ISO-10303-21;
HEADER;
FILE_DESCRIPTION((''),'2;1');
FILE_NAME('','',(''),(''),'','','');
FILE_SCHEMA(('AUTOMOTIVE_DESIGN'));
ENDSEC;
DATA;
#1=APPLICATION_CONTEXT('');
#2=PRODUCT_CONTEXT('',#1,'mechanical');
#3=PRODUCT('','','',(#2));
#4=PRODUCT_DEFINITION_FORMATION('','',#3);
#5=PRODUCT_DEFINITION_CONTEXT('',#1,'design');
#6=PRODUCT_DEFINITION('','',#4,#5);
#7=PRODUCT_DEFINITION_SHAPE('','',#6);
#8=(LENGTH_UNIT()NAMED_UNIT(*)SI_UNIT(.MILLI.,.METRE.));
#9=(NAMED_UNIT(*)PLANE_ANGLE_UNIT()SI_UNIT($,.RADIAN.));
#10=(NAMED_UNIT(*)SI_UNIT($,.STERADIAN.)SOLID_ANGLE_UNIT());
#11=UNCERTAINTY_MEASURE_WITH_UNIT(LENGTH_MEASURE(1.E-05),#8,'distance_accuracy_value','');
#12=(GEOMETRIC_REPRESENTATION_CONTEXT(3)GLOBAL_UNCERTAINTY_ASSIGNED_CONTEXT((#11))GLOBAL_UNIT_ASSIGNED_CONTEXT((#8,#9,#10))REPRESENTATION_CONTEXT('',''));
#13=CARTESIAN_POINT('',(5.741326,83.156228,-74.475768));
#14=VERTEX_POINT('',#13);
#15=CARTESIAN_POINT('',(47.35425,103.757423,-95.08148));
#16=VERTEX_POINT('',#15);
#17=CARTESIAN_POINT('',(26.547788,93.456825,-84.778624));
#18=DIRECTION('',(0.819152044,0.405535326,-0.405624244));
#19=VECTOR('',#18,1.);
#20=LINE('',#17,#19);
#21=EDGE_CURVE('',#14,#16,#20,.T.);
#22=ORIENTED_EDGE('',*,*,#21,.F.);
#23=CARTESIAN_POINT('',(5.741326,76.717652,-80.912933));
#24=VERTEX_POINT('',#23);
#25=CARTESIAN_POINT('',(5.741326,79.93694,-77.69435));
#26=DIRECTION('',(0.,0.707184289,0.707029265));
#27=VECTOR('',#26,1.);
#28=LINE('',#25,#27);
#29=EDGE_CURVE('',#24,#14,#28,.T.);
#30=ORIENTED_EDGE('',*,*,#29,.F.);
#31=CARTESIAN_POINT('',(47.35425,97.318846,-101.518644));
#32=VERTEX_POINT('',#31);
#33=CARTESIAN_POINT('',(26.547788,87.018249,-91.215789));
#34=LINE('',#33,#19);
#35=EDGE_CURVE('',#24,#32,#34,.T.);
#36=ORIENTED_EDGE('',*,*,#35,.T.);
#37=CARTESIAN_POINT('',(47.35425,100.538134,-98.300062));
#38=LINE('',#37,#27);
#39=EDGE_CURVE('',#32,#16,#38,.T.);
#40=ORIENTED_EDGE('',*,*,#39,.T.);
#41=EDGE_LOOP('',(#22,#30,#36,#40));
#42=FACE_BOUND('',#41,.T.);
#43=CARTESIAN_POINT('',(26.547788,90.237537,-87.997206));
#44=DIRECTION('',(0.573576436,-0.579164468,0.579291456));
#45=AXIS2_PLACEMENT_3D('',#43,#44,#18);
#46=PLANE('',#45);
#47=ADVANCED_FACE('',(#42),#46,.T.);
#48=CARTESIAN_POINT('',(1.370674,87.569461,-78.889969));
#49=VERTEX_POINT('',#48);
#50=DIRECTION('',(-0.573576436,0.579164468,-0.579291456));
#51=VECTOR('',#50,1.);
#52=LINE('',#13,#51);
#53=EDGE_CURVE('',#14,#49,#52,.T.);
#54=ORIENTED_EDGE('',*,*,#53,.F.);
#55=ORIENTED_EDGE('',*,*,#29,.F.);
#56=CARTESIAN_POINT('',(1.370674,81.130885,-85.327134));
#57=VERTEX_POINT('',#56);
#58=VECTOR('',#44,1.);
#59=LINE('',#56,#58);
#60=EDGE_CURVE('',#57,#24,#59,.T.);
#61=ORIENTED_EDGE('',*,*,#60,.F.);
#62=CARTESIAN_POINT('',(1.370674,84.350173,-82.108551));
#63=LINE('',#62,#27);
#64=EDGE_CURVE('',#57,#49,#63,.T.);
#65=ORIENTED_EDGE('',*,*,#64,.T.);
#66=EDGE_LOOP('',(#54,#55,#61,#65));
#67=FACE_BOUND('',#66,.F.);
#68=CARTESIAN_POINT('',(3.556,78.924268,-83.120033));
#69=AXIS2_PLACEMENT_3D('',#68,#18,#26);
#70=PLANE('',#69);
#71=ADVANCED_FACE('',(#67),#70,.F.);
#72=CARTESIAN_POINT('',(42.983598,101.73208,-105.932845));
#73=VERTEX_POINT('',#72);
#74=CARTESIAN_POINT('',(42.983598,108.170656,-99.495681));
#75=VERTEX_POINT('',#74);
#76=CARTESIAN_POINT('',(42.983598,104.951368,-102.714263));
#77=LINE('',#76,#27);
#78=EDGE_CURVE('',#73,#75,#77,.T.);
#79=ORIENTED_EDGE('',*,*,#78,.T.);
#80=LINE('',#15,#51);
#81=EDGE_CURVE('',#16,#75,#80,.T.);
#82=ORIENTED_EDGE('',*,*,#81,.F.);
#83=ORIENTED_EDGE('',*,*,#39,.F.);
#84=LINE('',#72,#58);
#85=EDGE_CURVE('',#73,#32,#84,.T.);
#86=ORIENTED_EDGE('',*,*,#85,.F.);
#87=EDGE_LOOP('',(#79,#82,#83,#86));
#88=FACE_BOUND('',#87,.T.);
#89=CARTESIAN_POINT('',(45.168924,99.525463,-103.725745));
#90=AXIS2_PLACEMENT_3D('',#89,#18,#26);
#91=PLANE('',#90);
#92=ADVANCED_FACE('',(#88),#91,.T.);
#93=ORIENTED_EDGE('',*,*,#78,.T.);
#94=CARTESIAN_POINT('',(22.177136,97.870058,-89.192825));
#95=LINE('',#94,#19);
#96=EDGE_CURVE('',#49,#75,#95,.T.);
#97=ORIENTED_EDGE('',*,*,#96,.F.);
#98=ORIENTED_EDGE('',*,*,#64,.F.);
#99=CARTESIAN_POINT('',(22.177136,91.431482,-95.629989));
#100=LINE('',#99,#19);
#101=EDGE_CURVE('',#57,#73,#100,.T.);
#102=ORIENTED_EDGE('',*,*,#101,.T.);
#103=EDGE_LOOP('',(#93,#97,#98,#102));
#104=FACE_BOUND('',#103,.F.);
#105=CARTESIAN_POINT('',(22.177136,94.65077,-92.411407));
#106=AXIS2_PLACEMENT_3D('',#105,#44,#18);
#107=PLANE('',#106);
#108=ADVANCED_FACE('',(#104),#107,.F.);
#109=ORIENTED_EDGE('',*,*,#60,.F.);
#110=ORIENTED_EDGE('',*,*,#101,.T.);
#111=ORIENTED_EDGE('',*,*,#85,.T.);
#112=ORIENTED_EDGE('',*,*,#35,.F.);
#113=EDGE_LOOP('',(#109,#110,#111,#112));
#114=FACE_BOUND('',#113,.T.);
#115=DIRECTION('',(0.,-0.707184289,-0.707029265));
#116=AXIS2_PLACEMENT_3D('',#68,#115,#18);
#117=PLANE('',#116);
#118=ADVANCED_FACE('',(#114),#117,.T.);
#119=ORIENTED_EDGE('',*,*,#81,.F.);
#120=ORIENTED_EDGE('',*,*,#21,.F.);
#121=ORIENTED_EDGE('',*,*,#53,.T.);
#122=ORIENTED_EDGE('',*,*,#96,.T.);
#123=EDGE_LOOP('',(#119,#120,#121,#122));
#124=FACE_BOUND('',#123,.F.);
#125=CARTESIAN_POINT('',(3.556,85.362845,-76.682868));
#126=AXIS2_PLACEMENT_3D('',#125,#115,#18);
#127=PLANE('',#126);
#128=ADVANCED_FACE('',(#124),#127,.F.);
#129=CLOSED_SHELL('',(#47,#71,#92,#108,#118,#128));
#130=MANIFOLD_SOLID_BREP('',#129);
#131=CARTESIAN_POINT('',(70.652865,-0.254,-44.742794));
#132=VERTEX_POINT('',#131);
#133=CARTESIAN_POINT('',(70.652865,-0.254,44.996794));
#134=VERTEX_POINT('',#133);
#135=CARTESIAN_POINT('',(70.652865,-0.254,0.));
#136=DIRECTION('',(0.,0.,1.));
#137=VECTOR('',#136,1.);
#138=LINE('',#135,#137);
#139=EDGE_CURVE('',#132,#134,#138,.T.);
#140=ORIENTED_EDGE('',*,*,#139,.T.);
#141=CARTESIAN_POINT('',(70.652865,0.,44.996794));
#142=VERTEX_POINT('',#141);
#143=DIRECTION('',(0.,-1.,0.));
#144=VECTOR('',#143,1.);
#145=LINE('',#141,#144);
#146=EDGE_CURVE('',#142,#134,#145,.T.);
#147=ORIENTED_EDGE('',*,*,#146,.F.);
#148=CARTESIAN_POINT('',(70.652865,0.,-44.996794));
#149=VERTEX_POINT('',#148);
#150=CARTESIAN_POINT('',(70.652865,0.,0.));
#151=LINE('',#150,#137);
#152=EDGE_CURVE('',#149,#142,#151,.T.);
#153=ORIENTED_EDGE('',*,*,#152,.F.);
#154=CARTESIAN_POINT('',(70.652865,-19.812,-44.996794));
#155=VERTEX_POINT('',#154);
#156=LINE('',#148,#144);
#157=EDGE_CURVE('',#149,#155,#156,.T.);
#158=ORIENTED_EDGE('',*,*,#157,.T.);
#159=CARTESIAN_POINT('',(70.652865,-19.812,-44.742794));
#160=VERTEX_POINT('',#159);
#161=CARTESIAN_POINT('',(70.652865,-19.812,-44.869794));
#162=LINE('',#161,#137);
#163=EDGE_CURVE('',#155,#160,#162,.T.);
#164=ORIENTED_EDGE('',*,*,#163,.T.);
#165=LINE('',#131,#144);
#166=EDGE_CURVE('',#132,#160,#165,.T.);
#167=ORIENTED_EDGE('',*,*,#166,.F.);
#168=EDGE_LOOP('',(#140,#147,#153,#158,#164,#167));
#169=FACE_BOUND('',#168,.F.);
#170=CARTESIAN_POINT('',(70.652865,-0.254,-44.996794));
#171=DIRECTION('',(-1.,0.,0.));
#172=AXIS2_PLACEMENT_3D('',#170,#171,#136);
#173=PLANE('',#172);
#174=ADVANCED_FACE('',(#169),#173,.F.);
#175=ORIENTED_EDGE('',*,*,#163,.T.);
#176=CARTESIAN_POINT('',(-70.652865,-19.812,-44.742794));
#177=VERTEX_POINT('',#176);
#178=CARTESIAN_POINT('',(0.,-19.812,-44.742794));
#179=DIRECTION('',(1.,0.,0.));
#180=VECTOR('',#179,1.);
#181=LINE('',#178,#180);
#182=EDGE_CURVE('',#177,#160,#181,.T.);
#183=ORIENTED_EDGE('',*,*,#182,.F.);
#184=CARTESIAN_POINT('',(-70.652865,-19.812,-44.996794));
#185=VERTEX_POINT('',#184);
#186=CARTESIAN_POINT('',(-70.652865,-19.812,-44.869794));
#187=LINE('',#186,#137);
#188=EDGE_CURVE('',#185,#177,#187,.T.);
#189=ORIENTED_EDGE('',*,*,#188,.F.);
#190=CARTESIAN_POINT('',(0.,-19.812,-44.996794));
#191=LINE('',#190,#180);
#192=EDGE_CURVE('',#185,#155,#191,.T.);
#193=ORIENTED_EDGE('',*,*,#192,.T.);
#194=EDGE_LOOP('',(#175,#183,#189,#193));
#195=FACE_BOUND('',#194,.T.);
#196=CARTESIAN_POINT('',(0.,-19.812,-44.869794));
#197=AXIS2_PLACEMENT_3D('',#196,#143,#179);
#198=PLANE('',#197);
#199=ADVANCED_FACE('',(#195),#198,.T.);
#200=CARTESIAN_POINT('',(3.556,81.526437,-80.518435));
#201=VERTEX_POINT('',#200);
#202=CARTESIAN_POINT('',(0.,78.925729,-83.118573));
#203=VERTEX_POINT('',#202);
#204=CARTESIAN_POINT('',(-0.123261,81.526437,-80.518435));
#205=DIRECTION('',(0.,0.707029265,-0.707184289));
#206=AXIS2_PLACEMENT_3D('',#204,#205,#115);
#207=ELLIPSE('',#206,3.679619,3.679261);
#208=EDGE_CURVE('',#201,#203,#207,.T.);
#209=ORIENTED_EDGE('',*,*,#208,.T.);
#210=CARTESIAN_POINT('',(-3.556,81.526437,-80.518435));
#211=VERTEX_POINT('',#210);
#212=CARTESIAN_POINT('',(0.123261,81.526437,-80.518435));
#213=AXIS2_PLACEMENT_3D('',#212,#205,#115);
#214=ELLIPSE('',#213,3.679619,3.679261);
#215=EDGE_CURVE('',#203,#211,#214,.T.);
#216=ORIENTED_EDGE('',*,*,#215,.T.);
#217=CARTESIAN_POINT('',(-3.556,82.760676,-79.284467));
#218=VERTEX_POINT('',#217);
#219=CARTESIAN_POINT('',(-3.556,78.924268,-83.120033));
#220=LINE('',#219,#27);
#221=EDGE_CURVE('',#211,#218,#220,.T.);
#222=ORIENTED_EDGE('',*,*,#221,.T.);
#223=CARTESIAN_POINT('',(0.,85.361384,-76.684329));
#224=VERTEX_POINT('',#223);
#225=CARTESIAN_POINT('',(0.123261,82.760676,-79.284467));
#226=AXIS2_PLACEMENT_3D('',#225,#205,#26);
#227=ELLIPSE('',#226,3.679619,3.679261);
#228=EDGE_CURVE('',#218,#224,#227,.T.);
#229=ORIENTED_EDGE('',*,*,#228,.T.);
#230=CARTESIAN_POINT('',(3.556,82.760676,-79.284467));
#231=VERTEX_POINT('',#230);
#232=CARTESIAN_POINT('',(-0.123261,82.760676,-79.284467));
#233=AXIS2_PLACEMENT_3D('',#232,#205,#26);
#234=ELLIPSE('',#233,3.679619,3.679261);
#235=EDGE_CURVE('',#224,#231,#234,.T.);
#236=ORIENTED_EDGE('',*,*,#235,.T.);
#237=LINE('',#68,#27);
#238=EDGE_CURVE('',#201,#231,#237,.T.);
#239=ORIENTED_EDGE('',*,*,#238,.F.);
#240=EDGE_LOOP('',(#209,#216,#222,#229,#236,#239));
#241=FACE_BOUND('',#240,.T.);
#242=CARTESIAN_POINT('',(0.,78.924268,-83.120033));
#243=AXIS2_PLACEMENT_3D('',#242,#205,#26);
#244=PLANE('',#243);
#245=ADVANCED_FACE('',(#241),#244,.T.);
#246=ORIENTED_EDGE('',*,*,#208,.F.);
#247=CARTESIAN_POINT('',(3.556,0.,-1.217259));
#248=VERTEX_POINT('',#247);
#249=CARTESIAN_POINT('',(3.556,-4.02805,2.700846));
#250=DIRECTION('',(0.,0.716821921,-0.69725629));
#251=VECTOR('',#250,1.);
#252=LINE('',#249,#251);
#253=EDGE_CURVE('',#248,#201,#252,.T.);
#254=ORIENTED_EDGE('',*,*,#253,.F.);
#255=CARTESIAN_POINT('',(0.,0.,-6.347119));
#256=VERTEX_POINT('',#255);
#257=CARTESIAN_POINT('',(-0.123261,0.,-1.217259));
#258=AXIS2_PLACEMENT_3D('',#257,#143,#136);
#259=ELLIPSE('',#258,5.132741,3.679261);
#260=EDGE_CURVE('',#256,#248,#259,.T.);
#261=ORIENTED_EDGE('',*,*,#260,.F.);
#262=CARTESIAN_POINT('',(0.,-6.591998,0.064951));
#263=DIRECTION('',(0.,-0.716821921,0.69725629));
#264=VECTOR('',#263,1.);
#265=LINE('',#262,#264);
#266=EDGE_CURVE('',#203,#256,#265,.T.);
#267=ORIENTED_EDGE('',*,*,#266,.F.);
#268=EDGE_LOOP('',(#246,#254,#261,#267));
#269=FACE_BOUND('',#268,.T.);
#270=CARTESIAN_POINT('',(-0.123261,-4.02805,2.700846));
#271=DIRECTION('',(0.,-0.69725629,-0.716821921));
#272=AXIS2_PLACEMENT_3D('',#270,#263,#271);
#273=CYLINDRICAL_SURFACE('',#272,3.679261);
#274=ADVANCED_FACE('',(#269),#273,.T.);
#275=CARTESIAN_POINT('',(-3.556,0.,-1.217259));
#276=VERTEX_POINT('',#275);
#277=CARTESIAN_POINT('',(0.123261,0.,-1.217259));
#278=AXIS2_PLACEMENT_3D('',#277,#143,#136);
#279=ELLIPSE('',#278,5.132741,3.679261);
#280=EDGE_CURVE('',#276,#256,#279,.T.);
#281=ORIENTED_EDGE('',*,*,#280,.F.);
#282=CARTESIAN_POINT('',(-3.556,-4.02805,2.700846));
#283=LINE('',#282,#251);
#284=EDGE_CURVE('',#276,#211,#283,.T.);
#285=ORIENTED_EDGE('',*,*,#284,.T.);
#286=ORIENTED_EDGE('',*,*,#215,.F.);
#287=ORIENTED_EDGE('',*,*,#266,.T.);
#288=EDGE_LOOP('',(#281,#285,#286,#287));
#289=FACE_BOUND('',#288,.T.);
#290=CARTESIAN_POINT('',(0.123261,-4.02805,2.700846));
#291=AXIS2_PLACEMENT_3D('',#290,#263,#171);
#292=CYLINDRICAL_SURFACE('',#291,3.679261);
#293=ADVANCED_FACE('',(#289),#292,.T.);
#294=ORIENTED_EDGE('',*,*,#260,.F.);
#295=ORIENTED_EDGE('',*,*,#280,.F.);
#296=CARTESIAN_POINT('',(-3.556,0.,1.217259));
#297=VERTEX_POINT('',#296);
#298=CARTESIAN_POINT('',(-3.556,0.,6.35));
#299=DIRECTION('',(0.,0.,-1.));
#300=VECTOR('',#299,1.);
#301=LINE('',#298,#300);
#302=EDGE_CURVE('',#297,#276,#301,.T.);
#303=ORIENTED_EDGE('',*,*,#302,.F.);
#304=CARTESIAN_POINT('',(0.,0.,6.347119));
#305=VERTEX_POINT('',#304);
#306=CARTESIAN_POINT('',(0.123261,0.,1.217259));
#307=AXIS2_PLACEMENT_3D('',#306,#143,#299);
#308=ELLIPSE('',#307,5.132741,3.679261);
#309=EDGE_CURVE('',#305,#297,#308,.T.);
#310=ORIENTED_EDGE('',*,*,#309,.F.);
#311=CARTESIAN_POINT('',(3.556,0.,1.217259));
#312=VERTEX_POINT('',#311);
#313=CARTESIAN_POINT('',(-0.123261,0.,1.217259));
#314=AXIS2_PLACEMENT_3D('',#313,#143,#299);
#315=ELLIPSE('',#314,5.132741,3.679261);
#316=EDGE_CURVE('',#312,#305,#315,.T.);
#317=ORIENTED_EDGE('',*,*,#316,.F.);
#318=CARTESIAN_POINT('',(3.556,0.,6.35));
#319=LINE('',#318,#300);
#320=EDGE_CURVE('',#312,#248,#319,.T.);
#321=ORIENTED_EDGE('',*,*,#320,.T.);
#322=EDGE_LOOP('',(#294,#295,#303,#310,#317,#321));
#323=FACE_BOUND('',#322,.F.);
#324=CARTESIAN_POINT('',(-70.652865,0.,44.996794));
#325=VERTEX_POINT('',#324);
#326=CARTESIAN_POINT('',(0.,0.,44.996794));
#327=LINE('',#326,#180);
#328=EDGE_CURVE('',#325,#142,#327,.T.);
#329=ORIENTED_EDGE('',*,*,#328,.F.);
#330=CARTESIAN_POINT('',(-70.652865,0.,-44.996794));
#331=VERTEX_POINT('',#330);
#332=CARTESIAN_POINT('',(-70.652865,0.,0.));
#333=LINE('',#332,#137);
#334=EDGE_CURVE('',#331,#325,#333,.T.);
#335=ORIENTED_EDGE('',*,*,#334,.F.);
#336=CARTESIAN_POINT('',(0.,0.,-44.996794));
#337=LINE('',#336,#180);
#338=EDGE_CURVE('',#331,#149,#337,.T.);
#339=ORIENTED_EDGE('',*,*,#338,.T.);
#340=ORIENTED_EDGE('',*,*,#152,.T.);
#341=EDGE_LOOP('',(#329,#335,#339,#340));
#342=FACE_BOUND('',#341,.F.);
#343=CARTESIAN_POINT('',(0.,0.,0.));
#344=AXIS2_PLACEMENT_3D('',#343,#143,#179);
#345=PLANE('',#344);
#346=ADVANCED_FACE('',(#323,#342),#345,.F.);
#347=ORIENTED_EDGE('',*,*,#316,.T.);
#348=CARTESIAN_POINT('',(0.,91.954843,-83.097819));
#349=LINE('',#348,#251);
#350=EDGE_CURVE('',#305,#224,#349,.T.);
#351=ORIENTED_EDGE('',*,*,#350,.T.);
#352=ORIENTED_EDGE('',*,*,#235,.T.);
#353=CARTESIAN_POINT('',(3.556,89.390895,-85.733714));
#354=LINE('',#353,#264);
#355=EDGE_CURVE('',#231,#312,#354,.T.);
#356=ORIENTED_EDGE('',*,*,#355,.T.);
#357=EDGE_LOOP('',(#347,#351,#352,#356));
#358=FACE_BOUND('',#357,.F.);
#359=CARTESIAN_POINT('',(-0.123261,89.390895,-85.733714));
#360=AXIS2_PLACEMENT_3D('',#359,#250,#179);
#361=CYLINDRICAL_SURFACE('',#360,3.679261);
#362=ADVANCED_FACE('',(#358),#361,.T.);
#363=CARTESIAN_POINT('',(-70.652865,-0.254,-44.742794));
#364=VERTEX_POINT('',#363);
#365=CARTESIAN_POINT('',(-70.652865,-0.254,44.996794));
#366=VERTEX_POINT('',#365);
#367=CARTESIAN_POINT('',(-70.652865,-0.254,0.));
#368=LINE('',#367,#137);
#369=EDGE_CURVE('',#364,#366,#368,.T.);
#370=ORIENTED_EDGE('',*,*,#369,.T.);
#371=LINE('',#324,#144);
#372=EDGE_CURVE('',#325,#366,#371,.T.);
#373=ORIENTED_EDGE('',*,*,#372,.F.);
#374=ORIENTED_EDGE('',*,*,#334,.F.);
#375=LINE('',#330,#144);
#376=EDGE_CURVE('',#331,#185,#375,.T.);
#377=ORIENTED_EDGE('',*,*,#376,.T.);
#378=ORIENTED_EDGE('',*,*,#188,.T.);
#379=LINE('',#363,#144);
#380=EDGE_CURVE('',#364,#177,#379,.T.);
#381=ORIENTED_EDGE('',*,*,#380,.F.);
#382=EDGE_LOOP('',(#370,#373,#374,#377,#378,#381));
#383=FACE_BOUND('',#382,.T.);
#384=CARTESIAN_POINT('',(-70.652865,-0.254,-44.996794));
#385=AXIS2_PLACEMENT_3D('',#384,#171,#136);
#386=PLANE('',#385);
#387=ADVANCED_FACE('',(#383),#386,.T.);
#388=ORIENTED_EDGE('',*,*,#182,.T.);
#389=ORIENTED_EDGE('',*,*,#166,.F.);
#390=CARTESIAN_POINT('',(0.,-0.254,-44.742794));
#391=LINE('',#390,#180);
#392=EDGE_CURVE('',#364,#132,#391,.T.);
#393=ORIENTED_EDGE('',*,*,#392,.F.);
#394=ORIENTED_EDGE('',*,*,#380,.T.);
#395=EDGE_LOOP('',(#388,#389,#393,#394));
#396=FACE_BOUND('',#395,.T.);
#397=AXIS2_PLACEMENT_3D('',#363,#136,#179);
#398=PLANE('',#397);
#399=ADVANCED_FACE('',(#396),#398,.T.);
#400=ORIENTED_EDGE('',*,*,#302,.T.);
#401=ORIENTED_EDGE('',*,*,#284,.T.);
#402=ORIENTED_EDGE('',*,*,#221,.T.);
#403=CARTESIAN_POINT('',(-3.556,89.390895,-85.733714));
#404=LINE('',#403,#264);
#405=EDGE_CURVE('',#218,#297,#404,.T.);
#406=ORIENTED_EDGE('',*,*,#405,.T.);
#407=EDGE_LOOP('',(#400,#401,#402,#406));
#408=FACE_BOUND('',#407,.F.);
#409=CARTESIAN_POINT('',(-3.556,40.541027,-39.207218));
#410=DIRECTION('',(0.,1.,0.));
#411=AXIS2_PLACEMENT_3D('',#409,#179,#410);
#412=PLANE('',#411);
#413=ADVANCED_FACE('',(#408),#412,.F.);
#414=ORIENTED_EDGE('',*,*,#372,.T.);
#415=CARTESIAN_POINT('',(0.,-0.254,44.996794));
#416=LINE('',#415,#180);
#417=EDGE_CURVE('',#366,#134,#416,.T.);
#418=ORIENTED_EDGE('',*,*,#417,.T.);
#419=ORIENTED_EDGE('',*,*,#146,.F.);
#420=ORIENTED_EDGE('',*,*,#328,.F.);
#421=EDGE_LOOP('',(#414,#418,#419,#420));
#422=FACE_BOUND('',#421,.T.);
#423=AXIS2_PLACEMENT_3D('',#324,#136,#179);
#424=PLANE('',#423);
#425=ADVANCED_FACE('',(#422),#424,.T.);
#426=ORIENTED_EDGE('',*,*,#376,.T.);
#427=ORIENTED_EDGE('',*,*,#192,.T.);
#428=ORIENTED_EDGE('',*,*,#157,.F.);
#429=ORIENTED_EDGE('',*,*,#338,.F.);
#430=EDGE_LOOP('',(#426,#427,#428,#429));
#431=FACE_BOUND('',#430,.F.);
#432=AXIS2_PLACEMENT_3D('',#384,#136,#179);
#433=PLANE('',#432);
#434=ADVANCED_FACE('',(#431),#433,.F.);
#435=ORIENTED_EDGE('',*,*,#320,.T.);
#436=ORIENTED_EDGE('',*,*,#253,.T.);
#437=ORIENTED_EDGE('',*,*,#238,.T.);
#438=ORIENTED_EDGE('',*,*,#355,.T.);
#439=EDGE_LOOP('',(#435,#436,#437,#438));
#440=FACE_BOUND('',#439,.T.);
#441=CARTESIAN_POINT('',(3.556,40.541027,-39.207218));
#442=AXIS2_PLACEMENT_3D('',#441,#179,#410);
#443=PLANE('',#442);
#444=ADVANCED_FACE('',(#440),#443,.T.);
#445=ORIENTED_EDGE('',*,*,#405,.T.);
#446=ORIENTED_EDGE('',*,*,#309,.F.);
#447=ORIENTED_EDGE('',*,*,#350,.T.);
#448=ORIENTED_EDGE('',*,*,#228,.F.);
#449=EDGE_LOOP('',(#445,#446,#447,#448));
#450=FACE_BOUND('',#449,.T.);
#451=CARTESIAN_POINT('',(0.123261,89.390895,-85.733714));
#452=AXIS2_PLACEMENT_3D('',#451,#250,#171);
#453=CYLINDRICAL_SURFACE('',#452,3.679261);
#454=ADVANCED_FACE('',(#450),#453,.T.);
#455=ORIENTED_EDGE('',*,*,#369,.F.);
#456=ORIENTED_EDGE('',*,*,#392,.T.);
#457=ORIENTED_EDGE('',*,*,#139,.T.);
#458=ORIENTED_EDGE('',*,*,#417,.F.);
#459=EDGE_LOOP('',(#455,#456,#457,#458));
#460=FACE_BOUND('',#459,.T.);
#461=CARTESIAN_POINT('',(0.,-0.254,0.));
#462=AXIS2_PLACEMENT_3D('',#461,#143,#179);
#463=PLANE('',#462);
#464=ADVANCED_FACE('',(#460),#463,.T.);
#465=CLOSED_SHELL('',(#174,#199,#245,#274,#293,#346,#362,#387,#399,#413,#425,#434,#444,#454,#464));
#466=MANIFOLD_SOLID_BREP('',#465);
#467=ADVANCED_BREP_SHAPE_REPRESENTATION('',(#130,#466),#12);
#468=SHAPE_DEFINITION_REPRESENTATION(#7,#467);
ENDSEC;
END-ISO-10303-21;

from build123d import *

# Parameters (mm, degrees)
F0_W         = 141.3057297468
F0_H         = 89.9935886264
F1_DEPTH     = 0.254
F2_W         = 141.3057297468
F2_H         = 0.254
F3_DEPTH     = 19.558
F5_DEPTH     = 3.556
F7_W         = 50.8
F7_H         = 9.1045236337
F8_DEPTH     = 3.81
F9_T4_DEPTH  = 137.4814553735
F9_T9_DEPTH  = 128.499341567
F9_T14_DEPTH = 137.4814553735
F9_T19_DEPTH = 128.499341567


# Not quite as in the source:
# - a fillet or chamfer that OpenCascade refuses, or shapes differently, is made with other operations: its cross-section is extruded or revolved along the edge and cut away or added


with BuildPart() as f1:
    # F0 (on Front) → F1 (new body)
    with BuildSketch(Plane.XZ):
        Rectangle(F0_W, F0_H)
    extrude(amount=F1_DEPTH)

    # F2 (on face) → F3 (join)
    with BuildSketch(Plane.XZ.offset(0.254)):
        with Locations((0, -44.8697943132)):
            Rectangle(F2_W, F2_H)
    extrude(amount=F3_DEPTH)

    # F4 (on Right) → F5 (join, symmetric)
    with BuildSketch(Plane.YZ):
        Polygon((85.3628445563, -76.6828684929), (0, 6.35), (0, -6.35), (78.9242684841, -83.120033145), align=None)
    extrude(amount=F5_DEPTH, both=True)

    # F9: fillet of radius 3.6792614691 on 4 edges, made by hand


with BuildPart() as f8:
    # F7 (on face) → F8 (new body, symmetric)
    with BuildSketch(Plane(origin=(-52.6664876685, 53.1795875222, -53.1912477395), x_dir=(0.8191520443, 0.4055353262, -0.4056242443), z_dir=(0.5735764364, -0.5791644677, 0.579291456))):
        with Locations((94.0349842627, 1.5979685725)):
            Rectangle(F7_W, F7_H)
    extrude(amount=F8_DEPTH, both=True)


with BuildPart() as f9_tool2:
    # F9_s3 → F9_t4 (new body)
    with BuildSketch(Plane(origin=(0, 88.7824981746, -86.3591827769), x_dir=(1, 0, 0), z_dir=(0, -0.7168219209, 0.6972562899))):
        with BuildLine():
            ThreePointArc((-3.556, 0.8725577284), (-2.4783692655, 3.474188463), (0.1232614691, 4.5518191975))
            Line((0.1232614691, 4.5518191975), (-3.556, 4.5518191975))
            Line((-3.556, 4.5518191975), (-3.556, 0.8725577284))
        make_face()
    extrude(amount=F9_T4_DEPTH)

    split(bisect_by=Plane.XZ, keep=Keep.BOTTOM)


with BuildPart() as f1_1:
    add(f1.part)

    # F9_t1: cut F9_tool2
    add(f9_tool2.part, mode=Mode.SUBTRACT)


with BuildPart() as f9_tool7:
    # F9_s8 → F9_t9 (new body)
    with BuildSketch(Plane(origin=(0, -3.4196536182, 3.326314284), x_dir=(1, 0, 0), z_dir=(0, 0.7168219209, -0.6972562899))):
        with BuildLine():
            ThreePointArc((-3.556, 0.8725577284), (-2.4783692655, 3.474188463), (0.1232614691, 4.5518191975))
            Line((0.1232614691, 4.5518191975), (-3.556, 4.5518191975))
            Line((-3.556, 4.5518191975), (-3.556, 0.8725577284))
        make_face()
    extrude(amount=F9_T9_DEPTH)

    split(bisect_by=Plane.XZ, keep=Keep.BOTTOM)


with BuildPart() as f1_2:
    add(f1_1.part)

    # F9_t6: cut F9_tool7
    add(f9_tool7.part, mode=Mode.SUBTRACT)


with BuildPart() as f9_tool12:
    # F9_s13 → F9_t14 (new body)
    with BuildSketch(Plane(origin=(0, 88.7824981746, -86.3591827769), x_dir=(1, 0, 0), z_dir=(0, -0.7168219209, 0.6972562899))):
        with BuildLine():
            ThreePointArc((3.556, 0.8725577284), (2.4783692655, 3.474188463), (-0.1232614691, 4.5518191975))
            Line((-0.1232614691, 4.5518191975), (3.556, 4.5518191975))
            Line((3.556, 4.5518191975), (3.556, 0.8725577284))
        make_face()
    extrude(amount=F9_T14_DEPTH)

    split(bisect_by=Plane.XZ, keep=Keep.BOTTOM)


with BuildPart() as f1_3:
    add(f1_2.part)

    # F9_t11: cut F9_tool12
    add(f9_tool12.part, mode=Mode.SUBTRACT)


with BuildPart() as f9_tool17:
    # F9_s18 → F9_t19 (new body)
    with BuildSketch(Plane(origin=(0, -3.4196536182, 3.326314284), x_dir=(1, 0, 0), z_dir=(0, 0.7168219209, -0.6972562899))):
        with BuildLine():
            ThreePointArc((-0.1232614691, 4.5518191975), (2.4783692655, 3.474188463), (3.556, 0.8725577284))
            Line((3.556, 0.8725577284), (3.556, 4.5518191975))
            Line((3.556, 4.5518191975), (-0.1232614691, 4.5518191975))
        make_face()
    extrude(amount=F9_T19_DEPTH)

    split(bisect_by=Plane.XZ, keep=Keep.BOTTOM)


with BuildPart() as f1_4:
    add(f1_3.part)

    # F9_t16: cut F9_tool17
    add(f9_tool17.part, mode=Mode.SUBTRACT)


solid = Compound([f8.part, f1_4.part])
